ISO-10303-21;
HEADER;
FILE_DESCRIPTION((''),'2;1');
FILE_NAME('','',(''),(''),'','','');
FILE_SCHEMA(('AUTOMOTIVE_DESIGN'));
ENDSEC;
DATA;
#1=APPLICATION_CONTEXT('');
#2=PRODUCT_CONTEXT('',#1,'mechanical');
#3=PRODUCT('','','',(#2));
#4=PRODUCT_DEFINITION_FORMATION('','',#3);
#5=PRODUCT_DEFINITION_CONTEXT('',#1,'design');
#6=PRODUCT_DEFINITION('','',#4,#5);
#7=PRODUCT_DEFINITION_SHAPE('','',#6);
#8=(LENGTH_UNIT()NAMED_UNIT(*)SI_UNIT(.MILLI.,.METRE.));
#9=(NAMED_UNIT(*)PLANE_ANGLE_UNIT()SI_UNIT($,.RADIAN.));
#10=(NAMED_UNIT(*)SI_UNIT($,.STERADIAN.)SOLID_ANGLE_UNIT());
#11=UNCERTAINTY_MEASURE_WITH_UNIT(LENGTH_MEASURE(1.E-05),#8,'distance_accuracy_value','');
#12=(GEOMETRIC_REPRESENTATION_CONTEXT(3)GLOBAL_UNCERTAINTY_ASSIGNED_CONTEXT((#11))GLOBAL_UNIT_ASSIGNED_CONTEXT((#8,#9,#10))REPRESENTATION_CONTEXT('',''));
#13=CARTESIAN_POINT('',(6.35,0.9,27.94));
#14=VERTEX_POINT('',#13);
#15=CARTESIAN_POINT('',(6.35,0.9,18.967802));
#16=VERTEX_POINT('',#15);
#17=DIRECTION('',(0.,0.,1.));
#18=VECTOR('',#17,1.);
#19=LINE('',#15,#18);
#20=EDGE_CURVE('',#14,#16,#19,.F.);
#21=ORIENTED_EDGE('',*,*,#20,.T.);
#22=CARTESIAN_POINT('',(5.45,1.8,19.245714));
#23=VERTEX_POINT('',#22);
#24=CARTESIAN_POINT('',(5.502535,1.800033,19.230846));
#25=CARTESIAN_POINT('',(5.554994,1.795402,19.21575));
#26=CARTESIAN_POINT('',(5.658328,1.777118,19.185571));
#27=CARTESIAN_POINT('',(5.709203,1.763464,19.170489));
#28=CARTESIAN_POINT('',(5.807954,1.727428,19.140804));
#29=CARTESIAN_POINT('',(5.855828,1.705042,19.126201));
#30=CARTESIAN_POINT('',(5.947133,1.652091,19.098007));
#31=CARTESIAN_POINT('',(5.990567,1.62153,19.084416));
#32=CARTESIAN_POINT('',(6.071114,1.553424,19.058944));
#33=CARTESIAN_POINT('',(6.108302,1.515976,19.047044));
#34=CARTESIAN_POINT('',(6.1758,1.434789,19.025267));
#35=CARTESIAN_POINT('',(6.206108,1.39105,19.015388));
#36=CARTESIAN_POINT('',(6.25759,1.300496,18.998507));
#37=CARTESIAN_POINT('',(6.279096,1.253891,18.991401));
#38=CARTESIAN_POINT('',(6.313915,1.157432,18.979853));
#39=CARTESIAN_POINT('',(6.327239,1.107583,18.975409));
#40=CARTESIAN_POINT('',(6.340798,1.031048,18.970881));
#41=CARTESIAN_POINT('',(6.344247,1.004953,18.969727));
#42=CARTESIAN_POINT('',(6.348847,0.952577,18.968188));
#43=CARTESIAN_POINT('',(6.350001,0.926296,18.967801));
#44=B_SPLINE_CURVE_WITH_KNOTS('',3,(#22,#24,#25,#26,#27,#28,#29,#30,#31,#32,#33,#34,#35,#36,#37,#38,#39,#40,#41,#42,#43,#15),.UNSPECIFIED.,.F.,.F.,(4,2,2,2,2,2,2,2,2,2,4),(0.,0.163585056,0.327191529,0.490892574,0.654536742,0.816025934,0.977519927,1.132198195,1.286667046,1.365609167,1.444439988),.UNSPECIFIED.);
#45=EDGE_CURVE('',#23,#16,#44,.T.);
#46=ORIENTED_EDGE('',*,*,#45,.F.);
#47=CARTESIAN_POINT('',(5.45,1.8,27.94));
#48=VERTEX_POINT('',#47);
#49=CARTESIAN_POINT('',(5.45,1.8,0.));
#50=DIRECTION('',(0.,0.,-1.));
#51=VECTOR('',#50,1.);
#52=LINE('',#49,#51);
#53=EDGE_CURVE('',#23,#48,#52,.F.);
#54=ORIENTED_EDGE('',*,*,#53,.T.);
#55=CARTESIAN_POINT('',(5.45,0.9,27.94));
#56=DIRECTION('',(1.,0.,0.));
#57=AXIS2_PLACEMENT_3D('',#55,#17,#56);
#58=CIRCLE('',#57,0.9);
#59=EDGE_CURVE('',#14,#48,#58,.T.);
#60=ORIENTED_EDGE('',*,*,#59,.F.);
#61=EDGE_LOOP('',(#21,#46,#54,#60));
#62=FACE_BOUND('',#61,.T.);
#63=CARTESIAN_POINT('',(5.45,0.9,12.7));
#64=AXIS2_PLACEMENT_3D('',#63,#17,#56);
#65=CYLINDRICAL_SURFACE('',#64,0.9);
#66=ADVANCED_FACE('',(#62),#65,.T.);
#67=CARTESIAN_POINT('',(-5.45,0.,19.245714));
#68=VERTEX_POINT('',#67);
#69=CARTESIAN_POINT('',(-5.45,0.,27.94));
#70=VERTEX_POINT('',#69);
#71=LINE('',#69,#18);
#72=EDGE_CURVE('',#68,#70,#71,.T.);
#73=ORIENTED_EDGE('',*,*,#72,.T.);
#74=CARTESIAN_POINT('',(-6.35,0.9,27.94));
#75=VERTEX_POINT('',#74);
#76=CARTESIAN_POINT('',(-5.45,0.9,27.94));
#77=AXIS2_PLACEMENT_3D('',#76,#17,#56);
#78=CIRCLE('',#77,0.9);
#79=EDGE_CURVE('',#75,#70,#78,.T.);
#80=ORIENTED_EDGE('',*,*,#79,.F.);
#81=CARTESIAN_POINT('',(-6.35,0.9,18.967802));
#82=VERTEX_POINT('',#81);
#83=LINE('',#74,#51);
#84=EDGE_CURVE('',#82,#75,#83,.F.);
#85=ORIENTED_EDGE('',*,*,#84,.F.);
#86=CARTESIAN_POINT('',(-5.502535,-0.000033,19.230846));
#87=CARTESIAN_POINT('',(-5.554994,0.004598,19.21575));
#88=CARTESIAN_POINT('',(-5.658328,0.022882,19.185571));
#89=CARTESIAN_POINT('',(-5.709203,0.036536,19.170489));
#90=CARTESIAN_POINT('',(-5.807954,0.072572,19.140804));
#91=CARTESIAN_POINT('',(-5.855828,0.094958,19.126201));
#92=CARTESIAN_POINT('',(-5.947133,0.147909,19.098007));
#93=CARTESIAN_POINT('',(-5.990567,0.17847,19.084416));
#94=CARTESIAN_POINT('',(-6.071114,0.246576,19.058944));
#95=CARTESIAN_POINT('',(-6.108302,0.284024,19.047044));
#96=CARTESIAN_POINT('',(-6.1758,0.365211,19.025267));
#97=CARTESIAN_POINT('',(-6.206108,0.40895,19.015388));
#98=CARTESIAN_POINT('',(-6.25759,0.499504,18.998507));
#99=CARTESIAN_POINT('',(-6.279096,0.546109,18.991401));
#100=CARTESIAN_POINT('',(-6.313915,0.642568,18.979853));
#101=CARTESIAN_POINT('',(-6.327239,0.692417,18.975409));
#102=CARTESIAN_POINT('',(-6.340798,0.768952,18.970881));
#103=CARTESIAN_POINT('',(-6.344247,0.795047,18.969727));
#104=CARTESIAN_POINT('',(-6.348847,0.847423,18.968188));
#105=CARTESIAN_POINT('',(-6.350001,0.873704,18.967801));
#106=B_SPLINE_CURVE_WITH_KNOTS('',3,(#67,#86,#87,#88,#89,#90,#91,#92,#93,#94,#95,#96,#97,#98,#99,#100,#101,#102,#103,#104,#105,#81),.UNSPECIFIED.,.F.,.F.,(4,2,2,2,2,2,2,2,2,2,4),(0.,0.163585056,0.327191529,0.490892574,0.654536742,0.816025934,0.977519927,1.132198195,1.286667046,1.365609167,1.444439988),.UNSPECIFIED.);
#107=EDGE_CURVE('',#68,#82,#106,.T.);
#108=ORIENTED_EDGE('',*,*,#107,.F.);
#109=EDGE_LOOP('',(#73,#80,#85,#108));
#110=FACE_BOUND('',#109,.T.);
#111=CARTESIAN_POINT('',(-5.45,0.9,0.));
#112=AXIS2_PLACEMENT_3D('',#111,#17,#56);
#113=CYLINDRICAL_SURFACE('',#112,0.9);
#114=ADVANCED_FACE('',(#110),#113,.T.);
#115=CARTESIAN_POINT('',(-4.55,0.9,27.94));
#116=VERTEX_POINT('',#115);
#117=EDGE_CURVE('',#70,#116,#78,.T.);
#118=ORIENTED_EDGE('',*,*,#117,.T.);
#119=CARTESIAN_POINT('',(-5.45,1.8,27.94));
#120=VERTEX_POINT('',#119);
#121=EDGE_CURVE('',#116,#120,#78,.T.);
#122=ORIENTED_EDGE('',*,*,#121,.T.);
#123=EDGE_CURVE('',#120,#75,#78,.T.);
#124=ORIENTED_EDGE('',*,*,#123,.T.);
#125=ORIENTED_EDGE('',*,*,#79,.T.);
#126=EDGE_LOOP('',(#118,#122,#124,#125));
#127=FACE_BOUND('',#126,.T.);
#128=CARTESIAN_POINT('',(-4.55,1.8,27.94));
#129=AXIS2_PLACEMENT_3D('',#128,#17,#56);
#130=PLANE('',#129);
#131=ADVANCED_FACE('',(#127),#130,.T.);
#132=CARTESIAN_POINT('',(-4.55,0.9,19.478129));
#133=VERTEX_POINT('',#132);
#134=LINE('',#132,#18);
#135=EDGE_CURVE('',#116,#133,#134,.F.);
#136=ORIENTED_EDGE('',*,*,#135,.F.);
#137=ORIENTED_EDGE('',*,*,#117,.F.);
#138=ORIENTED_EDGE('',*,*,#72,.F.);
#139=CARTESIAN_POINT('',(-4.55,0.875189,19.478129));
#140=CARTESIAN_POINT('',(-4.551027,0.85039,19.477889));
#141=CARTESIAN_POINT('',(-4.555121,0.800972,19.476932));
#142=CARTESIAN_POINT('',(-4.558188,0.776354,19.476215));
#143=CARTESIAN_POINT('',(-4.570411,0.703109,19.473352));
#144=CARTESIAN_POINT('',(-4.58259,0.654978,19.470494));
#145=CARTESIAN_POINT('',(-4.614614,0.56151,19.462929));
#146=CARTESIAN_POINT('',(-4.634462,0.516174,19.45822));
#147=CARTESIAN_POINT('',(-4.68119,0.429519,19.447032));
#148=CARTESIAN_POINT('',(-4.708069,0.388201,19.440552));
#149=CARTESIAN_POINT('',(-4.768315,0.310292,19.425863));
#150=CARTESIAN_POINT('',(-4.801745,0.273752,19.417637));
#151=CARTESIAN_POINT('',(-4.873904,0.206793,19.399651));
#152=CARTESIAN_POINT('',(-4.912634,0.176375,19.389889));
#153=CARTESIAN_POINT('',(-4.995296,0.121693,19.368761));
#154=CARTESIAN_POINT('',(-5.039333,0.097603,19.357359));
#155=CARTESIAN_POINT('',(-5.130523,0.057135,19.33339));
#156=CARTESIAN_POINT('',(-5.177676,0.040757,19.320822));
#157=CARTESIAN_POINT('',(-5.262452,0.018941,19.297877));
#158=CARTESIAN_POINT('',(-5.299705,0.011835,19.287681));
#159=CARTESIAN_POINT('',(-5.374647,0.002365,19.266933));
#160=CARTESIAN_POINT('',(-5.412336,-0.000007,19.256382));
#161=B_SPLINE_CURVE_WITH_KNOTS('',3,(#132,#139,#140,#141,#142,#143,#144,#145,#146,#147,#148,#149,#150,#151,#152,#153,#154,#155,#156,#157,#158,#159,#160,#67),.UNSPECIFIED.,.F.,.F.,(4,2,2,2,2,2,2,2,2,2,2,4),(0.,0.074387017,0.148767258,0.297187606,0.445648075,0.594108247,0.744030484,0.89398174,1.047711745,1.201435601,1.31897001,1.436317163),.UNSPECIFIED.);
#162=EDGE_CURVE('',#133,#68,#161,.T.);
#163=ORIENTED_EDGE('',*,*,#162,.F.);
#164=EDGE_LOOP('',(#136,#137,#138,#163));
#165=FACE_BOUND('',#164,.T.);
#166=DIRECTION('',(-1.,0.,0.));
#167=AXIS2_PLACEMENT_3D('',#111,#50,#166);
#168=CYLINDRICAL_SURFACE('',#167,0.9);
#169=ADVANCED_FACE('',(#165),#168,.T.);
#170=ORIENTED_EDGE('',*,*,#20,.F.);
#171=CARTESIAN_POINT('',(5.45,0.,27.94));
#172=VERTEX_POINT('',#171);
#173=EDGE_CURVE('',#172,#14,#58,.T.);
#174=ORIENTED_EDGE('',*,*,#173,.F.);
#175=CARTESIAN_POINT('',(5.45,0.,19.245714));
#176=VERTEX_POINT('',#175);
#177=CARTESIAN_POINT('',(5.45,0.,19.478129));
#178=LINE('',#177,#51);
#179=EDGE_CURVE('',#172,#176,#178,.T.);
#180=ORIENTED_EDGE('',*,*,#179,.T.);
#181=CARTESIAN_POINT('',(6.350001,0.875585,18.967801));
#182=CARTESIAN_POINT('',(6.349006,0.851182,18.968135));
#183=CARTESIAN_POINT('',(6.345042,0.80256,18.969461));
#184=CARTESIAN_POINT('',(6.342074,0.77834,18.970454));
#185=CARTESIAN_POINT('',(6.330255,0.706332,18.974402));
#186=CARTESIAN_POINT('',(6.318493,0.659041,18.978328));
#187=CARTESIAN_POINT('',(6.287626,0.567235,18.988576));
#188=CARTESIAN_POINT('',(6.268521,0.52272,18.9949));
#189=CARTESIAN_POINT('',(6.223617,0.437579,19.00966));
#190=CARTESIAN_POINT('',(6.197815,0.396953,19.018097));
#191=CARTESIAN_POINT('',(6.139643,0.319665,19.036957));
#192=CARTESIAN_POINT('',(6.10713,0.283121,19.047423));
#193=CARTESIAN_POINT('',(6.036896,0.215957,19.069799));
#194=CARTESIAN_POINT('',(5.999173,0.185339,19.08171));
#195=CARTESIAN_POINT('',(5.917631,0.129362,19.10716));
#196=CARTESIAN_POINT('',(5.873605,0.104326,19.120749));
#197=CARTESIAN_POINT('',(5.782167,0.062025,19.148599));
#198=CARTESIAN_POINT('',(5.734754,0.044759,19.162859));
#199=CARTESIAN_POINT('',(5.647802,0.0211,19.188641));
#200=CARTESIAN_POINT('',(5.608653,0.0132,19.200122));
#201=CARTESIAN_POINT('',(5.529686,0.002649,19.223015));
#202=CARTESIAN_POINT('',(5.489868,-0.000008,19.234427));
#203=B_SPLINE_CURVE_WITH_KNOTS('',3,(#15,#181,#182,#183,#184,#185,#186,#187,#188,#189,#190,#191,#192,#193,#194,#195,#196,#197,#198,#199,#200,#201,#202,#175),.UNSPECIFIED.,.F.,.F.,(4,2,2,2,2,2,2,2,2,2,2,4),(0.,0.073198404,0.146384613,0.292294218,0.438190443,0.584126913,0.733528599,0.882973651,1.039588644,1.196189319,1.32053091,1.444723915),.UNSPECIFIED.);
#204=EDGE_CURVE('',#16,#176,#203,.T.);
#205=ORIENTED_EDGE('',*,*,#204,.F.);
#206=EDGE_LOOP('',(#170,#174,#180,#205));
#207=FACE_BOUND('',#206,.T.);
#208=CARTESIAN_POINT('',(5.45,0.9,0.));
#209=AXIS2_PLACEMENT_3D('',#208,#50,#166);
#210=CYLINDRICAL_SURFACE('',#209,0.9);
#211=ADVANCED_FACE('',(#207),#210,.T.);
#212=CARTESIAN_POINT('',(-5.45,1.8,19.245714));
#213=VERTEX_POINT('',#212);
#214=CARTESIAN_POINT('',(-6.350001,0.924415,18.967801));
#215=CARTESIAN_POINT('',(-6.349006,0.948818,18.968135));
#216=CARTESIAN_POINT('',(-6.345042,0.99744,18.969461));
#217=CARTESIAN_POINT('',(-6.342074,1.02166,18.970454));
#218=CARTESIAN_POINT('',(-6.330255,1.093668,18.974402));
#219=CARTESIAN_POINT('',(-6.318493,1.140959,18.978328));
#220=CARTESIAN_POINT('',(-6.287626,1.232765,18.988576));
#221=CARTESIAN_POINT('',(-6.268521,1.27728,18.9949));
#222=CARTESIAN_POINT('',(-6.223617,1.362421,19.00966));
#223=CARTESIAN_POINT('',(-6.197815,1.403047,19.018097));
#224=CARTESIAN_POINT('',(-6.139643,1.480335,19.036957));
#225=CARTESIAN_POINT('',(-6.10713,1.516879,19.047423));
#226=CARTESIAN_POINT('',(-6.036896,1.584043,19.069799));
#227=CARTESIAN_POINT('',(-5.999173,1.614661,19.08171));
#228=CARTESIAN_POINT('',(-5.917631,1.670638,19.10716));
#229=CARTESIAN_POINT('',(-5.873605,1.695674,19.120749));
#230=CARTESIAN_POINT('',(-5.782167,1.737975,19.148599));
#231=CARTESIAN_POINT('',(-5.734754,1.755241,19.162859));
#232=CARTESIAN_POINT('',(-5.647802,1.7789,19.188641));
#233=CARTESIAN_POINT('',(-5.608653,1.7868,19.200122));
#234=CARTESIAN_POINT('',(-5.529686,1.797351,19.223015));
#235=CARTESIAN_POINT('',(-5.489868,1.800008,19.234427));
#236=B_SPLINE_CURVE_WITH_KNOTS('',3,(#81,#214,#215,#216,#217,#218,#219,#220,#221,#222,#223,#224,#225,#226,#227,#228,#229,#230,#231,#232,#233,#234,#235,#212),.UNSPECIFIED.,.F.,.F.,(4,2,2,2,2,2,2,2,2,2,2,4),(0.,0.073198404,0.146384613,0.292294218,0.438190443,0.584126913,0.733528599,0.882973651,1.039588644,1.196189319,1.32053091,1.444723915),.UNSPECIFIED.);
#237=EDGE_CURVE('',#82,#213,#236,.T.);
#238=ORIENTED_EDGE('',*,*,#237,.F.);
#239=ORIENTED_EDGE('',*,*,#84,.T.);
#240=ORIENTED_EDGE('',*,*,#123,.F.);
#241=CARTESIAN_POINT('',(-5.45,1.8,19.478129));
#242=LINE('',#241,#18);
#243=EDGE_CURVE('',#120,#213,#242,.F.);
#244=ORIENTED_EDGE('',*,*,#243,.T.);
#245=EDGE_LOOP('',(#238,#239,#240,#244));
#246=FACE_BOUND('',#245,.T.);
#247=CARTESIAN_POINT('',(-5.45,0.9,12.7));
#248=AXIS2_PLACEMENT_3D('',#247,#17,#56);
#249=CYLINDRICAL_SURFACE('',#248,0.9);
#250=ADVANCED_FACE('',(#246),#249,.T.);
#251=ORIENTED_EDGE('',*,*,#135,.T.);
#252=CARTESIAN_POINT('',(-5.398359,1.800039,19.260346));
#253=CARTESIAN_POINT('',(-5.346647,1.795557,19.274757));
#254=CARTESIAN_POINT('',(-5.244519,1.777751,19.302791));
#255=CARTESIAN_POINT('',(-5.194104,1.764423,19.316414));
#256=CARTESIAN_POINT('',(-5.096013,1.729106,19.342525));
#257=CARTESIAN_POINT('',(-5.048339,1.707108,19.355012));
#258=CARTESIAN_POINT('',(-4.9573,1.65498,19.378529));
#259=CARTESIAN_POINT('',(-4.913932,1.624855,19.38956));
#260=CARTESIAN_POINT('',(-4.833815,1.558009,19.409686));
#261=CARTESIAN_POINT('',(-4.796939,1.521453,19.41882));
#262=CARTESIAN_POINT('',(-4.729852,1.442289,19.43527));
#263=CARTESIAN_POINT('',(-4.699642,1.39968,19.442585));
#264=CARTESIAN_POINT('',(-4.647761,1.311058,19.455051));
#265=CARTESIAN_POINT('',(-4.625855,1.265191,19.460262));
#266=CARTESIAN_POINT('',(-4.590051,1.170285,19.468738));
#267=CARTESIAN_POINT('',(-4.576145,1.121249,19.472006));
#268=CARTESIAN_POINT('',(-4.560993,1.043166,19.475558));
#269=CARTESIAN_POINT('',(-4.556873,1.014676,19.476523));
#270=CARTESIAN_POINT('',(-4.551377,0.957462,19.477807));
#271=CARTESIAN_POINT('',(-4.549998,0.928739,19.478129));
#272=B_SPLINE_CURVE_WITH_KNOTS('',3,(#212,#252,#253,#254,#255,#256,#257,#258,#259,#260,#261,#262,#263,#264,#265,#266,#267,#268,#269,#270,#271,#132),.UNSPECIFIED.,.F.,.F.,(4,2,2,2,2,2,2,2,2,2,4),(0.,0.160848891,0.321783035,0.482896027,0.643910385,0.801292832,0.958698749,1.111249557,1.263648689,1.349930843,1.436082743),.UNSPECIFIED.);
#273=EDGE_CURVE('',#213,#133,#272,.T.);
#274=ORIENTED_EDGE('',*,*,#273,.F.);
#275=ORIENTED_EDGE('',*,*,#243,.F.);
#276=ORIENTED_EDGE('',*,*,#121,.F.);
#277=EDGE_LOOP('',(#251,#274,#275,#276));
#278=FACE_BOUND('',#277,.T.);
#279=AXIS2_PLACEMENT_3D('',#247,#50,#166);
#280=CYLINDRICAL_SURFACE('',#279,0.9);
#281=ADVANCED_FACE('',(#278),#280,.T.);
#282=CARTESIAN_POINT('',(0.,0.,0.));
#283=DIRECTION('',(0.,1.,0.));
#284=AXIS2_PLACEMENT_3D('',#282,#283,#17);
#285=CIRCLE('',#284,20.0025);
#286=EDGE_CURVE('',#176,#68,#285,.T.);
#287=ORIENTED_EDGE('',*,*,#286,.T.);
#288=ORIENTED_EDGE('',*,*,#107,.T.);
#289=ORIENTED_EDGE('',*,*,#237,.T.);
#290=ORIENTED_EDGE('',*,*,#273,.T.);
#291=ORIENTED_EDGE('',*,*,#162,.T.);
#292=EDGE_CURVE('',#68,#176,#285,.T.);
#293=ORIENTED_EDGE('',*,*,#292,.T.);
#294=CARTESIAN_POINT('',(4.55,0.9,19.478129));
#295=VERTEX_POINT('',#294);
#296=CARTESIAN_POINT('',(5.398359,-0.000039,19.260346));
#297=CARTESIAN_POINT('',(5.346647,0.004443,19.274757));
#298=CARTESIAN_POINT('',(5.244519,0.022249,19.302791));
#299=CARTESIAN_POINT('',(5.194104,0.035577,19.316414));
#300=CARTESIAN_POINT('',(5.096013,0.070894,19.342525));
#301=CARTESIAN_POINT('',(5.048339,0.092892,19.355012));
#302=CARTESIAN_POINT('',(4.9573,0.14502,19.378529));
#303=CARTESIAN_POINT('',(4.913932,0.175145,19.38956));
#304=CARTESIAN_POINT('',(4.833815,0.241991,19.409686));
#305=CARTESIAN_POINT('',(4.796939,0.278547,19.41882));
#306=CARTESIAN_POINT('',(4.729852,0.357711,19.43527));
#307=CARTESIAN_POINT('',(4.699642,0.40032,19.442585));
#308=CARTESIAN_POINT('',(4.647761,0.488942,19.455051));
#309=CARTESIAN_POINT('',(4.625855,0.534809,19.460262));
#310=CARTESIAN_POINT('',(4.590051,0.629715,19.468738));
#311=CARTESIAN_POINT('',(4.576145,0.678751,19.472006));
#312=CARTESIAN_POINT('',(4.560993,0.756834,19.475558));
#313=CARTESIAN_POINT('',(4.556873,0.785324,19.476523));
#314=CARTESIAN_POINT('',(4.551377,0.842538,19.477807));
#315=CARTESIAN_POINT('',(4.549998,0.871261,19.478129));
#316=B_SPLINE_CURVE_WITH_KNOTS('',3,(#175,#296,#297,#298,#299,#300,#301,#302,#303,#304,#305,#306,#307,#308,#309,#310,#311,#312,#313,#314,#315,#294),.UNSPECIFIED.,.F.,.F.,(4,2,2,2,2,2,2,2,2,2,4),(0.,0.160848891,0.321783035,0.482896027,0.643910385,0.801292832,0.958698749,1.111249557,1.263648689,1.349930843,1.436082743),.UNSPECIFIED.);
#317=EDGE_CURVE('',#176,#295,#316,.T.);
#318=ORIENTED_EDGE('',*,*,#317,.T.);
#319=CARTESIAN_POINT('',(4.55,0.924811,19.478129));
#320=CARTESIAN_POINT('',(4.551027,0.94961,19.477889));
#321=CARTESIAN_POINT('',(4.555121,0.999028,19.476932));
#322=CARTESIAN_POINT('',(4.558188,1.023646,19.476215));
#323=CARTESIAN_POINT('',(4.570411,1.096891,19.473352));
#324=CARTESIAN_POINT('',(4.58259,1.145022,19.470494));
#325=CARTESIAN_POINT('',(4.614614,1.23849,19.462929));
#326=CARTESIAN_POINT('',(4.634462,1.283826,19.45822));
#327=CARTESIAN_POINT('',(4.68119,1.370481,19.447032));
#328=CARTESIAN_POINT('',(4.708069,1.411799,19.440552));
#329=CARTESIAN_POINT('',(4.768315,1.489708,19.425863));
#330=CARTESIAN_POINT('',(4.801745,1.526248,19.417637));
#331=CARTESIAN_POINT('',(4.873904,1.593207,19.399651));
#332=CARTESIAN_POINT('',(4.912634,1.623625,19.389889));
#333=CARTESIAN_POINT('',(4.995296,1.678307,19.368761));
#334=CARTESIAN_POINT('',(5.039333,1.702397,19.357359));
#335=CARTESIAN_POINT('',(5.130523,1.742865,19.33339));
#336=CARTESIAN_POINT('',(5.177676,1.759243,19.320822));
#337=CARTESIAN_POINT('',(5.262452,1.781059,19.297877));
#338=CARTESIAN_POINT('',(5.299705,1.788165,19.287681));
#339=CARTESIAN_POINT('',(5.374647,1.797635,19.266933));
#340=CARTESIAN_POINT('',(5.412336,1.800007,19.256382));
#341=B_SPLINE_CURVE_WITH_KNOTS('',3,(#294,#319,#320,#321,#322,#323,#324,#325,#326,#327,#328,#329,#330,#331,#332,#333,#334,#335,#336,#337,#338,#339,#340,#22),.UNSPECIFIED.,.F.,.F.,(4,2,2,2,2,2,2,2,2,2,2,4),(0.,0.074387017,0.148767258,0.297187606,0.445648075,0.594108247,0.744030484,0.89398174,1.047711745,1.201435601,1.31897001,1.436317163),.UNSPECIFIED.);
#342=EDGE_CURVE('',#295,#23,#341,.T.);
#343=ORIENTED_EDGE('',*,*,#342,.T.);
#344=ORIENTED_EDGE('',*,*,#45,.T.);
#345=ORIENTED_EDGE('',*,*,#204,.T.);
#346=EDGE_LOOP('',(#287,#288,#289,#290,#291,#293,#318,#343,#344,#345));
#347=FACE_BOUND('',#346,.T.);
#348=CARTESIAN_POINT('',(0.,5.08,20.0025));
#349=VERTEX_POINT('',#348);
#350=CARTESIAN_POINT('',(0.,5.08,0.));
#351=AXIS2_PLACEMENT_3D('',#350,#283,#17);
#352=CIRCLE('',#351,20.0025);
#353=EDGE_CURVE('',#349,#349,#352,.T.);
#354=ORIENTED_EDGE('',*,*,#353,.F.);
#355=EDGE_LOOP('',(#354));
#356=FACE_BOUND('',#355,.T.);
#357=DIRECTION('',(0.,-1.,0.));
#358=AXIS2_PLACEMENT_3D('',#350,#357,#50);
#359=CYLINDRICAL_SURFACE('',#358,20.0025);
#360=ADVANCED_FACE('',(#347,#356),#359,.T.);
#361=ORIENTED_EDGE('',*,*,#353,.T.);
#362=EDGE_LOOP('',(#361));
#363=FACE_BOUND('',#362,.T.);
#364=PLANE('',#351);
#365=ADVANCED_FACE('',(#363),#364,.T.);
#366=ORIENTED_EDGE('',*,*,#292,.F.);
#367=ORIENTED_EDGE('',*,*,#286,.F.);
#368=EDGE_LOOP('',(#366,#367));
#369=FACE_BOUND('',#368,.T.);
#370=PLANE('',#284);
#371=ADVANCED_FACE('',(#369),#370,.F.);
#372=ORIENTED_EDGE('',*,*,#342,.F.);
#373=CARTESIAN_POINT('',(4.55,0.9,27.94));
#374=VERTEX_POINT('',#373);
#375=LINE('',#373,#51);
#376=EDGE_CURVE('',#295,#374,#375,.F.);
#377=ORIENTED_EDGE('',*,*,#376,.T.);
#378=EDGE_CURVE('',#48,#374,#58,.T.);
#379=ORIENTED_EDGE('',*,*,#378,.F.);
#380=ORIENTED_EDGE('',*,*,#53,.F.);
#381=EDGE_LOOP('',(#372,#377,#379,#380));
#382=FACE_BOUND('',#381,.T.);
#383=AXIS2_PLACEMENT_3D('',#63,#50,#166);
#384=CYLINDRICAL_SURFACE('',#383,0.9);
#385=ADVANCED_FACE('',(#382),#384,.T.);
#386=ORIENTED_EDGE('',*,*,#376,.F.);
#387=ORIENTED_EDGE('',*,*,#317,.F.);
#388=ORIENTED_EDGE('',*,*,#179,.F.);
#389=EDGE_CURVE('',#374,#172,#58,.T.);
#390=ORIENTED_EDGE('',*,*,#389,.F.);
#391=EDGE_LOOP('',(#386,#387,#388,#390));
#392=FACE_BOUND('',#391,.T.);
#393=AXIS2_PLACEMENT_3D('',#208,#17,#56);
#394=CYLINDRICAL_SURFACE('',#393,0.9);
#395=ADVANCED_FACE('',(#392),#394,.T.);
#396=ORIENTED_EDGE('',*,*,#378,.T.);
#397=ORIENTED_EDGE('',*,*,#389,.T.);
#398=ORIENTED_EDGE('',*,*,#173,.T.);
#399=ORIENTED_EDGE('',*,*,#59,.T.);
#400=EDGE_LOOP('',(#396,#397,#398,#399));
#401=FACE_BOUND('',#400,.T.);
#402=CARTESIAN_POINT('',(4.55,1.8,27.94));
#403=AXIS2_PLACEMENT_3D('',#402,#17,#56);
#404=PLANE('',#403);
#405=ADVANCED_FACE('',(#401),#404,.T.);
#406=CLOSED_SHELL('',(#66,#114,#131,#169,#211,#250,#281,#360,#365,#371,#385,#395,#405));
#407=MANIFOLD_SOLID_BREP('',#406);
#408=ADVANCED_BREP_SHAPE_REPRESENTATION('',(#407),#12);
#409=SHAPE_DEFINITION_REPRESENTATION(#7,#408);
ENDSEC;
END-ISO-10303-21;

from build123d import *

# Parameters (mm, degrees)
SKETCH1_R           = 20.0025
BOSS_EXTRUDE1_DEPTH = 5.08
SKETCH2_W           = 1.8
SKETCH2_H           = 15.24
BOSS_EXTRUDE2_DEPTH = 1.8
FILLET1_R           = 0.9


with BuildPart() as part:
    # Sketch1 → Boss-Extrude1 (new body)
    with BuildSketch(Plane(origin=(0, 0, 0), x_dir=(1, 0, 0), z_dir=(0, 1, 0))):
        with Locations(Location((0, 0, 0), (0, 0, 270))):
            Circle(SKETCH1_R)
    extrude(amount=BOSS_EXTRUDE1_DEPTH)

    # Sketch2 → Boss-Extrude2 (add)
    with BuildSketch(Plane.XZ):
        with Locations((-5.45, 20.32)):
            Rectangle(SKETCH2_W, SKETCH2_H)
        with Locations((5.45, 20.32)):
            Rectangle(SKETCH2_W, SKETCH2_H)
    extrude(amount=-BOSS_EXTRUDE2_DEPTH)

    # Fillet1
    fillet1_edges = [part.edges().sort_by_distance(p)[0] for p in [
        (6.35, 1.8, 23.453900915),
        (6.35, 0, 23.453900915),
        (4.55, 1.8, 23.70906446),
        (4.55, 0, 23.70906446),
        (-6.35, 1.8, 23.453900915),
        (-4.55, 1.8, 23.70906446),
        (-6.35, 0, 23.453900915),
        (-4.55, 0, 23.70906446),
    ]]
    fillet(fillet1_edges, radius=FILLET1_R - 0.0001)  # a hair under: the kernel refuses the full size


solid = part.part
